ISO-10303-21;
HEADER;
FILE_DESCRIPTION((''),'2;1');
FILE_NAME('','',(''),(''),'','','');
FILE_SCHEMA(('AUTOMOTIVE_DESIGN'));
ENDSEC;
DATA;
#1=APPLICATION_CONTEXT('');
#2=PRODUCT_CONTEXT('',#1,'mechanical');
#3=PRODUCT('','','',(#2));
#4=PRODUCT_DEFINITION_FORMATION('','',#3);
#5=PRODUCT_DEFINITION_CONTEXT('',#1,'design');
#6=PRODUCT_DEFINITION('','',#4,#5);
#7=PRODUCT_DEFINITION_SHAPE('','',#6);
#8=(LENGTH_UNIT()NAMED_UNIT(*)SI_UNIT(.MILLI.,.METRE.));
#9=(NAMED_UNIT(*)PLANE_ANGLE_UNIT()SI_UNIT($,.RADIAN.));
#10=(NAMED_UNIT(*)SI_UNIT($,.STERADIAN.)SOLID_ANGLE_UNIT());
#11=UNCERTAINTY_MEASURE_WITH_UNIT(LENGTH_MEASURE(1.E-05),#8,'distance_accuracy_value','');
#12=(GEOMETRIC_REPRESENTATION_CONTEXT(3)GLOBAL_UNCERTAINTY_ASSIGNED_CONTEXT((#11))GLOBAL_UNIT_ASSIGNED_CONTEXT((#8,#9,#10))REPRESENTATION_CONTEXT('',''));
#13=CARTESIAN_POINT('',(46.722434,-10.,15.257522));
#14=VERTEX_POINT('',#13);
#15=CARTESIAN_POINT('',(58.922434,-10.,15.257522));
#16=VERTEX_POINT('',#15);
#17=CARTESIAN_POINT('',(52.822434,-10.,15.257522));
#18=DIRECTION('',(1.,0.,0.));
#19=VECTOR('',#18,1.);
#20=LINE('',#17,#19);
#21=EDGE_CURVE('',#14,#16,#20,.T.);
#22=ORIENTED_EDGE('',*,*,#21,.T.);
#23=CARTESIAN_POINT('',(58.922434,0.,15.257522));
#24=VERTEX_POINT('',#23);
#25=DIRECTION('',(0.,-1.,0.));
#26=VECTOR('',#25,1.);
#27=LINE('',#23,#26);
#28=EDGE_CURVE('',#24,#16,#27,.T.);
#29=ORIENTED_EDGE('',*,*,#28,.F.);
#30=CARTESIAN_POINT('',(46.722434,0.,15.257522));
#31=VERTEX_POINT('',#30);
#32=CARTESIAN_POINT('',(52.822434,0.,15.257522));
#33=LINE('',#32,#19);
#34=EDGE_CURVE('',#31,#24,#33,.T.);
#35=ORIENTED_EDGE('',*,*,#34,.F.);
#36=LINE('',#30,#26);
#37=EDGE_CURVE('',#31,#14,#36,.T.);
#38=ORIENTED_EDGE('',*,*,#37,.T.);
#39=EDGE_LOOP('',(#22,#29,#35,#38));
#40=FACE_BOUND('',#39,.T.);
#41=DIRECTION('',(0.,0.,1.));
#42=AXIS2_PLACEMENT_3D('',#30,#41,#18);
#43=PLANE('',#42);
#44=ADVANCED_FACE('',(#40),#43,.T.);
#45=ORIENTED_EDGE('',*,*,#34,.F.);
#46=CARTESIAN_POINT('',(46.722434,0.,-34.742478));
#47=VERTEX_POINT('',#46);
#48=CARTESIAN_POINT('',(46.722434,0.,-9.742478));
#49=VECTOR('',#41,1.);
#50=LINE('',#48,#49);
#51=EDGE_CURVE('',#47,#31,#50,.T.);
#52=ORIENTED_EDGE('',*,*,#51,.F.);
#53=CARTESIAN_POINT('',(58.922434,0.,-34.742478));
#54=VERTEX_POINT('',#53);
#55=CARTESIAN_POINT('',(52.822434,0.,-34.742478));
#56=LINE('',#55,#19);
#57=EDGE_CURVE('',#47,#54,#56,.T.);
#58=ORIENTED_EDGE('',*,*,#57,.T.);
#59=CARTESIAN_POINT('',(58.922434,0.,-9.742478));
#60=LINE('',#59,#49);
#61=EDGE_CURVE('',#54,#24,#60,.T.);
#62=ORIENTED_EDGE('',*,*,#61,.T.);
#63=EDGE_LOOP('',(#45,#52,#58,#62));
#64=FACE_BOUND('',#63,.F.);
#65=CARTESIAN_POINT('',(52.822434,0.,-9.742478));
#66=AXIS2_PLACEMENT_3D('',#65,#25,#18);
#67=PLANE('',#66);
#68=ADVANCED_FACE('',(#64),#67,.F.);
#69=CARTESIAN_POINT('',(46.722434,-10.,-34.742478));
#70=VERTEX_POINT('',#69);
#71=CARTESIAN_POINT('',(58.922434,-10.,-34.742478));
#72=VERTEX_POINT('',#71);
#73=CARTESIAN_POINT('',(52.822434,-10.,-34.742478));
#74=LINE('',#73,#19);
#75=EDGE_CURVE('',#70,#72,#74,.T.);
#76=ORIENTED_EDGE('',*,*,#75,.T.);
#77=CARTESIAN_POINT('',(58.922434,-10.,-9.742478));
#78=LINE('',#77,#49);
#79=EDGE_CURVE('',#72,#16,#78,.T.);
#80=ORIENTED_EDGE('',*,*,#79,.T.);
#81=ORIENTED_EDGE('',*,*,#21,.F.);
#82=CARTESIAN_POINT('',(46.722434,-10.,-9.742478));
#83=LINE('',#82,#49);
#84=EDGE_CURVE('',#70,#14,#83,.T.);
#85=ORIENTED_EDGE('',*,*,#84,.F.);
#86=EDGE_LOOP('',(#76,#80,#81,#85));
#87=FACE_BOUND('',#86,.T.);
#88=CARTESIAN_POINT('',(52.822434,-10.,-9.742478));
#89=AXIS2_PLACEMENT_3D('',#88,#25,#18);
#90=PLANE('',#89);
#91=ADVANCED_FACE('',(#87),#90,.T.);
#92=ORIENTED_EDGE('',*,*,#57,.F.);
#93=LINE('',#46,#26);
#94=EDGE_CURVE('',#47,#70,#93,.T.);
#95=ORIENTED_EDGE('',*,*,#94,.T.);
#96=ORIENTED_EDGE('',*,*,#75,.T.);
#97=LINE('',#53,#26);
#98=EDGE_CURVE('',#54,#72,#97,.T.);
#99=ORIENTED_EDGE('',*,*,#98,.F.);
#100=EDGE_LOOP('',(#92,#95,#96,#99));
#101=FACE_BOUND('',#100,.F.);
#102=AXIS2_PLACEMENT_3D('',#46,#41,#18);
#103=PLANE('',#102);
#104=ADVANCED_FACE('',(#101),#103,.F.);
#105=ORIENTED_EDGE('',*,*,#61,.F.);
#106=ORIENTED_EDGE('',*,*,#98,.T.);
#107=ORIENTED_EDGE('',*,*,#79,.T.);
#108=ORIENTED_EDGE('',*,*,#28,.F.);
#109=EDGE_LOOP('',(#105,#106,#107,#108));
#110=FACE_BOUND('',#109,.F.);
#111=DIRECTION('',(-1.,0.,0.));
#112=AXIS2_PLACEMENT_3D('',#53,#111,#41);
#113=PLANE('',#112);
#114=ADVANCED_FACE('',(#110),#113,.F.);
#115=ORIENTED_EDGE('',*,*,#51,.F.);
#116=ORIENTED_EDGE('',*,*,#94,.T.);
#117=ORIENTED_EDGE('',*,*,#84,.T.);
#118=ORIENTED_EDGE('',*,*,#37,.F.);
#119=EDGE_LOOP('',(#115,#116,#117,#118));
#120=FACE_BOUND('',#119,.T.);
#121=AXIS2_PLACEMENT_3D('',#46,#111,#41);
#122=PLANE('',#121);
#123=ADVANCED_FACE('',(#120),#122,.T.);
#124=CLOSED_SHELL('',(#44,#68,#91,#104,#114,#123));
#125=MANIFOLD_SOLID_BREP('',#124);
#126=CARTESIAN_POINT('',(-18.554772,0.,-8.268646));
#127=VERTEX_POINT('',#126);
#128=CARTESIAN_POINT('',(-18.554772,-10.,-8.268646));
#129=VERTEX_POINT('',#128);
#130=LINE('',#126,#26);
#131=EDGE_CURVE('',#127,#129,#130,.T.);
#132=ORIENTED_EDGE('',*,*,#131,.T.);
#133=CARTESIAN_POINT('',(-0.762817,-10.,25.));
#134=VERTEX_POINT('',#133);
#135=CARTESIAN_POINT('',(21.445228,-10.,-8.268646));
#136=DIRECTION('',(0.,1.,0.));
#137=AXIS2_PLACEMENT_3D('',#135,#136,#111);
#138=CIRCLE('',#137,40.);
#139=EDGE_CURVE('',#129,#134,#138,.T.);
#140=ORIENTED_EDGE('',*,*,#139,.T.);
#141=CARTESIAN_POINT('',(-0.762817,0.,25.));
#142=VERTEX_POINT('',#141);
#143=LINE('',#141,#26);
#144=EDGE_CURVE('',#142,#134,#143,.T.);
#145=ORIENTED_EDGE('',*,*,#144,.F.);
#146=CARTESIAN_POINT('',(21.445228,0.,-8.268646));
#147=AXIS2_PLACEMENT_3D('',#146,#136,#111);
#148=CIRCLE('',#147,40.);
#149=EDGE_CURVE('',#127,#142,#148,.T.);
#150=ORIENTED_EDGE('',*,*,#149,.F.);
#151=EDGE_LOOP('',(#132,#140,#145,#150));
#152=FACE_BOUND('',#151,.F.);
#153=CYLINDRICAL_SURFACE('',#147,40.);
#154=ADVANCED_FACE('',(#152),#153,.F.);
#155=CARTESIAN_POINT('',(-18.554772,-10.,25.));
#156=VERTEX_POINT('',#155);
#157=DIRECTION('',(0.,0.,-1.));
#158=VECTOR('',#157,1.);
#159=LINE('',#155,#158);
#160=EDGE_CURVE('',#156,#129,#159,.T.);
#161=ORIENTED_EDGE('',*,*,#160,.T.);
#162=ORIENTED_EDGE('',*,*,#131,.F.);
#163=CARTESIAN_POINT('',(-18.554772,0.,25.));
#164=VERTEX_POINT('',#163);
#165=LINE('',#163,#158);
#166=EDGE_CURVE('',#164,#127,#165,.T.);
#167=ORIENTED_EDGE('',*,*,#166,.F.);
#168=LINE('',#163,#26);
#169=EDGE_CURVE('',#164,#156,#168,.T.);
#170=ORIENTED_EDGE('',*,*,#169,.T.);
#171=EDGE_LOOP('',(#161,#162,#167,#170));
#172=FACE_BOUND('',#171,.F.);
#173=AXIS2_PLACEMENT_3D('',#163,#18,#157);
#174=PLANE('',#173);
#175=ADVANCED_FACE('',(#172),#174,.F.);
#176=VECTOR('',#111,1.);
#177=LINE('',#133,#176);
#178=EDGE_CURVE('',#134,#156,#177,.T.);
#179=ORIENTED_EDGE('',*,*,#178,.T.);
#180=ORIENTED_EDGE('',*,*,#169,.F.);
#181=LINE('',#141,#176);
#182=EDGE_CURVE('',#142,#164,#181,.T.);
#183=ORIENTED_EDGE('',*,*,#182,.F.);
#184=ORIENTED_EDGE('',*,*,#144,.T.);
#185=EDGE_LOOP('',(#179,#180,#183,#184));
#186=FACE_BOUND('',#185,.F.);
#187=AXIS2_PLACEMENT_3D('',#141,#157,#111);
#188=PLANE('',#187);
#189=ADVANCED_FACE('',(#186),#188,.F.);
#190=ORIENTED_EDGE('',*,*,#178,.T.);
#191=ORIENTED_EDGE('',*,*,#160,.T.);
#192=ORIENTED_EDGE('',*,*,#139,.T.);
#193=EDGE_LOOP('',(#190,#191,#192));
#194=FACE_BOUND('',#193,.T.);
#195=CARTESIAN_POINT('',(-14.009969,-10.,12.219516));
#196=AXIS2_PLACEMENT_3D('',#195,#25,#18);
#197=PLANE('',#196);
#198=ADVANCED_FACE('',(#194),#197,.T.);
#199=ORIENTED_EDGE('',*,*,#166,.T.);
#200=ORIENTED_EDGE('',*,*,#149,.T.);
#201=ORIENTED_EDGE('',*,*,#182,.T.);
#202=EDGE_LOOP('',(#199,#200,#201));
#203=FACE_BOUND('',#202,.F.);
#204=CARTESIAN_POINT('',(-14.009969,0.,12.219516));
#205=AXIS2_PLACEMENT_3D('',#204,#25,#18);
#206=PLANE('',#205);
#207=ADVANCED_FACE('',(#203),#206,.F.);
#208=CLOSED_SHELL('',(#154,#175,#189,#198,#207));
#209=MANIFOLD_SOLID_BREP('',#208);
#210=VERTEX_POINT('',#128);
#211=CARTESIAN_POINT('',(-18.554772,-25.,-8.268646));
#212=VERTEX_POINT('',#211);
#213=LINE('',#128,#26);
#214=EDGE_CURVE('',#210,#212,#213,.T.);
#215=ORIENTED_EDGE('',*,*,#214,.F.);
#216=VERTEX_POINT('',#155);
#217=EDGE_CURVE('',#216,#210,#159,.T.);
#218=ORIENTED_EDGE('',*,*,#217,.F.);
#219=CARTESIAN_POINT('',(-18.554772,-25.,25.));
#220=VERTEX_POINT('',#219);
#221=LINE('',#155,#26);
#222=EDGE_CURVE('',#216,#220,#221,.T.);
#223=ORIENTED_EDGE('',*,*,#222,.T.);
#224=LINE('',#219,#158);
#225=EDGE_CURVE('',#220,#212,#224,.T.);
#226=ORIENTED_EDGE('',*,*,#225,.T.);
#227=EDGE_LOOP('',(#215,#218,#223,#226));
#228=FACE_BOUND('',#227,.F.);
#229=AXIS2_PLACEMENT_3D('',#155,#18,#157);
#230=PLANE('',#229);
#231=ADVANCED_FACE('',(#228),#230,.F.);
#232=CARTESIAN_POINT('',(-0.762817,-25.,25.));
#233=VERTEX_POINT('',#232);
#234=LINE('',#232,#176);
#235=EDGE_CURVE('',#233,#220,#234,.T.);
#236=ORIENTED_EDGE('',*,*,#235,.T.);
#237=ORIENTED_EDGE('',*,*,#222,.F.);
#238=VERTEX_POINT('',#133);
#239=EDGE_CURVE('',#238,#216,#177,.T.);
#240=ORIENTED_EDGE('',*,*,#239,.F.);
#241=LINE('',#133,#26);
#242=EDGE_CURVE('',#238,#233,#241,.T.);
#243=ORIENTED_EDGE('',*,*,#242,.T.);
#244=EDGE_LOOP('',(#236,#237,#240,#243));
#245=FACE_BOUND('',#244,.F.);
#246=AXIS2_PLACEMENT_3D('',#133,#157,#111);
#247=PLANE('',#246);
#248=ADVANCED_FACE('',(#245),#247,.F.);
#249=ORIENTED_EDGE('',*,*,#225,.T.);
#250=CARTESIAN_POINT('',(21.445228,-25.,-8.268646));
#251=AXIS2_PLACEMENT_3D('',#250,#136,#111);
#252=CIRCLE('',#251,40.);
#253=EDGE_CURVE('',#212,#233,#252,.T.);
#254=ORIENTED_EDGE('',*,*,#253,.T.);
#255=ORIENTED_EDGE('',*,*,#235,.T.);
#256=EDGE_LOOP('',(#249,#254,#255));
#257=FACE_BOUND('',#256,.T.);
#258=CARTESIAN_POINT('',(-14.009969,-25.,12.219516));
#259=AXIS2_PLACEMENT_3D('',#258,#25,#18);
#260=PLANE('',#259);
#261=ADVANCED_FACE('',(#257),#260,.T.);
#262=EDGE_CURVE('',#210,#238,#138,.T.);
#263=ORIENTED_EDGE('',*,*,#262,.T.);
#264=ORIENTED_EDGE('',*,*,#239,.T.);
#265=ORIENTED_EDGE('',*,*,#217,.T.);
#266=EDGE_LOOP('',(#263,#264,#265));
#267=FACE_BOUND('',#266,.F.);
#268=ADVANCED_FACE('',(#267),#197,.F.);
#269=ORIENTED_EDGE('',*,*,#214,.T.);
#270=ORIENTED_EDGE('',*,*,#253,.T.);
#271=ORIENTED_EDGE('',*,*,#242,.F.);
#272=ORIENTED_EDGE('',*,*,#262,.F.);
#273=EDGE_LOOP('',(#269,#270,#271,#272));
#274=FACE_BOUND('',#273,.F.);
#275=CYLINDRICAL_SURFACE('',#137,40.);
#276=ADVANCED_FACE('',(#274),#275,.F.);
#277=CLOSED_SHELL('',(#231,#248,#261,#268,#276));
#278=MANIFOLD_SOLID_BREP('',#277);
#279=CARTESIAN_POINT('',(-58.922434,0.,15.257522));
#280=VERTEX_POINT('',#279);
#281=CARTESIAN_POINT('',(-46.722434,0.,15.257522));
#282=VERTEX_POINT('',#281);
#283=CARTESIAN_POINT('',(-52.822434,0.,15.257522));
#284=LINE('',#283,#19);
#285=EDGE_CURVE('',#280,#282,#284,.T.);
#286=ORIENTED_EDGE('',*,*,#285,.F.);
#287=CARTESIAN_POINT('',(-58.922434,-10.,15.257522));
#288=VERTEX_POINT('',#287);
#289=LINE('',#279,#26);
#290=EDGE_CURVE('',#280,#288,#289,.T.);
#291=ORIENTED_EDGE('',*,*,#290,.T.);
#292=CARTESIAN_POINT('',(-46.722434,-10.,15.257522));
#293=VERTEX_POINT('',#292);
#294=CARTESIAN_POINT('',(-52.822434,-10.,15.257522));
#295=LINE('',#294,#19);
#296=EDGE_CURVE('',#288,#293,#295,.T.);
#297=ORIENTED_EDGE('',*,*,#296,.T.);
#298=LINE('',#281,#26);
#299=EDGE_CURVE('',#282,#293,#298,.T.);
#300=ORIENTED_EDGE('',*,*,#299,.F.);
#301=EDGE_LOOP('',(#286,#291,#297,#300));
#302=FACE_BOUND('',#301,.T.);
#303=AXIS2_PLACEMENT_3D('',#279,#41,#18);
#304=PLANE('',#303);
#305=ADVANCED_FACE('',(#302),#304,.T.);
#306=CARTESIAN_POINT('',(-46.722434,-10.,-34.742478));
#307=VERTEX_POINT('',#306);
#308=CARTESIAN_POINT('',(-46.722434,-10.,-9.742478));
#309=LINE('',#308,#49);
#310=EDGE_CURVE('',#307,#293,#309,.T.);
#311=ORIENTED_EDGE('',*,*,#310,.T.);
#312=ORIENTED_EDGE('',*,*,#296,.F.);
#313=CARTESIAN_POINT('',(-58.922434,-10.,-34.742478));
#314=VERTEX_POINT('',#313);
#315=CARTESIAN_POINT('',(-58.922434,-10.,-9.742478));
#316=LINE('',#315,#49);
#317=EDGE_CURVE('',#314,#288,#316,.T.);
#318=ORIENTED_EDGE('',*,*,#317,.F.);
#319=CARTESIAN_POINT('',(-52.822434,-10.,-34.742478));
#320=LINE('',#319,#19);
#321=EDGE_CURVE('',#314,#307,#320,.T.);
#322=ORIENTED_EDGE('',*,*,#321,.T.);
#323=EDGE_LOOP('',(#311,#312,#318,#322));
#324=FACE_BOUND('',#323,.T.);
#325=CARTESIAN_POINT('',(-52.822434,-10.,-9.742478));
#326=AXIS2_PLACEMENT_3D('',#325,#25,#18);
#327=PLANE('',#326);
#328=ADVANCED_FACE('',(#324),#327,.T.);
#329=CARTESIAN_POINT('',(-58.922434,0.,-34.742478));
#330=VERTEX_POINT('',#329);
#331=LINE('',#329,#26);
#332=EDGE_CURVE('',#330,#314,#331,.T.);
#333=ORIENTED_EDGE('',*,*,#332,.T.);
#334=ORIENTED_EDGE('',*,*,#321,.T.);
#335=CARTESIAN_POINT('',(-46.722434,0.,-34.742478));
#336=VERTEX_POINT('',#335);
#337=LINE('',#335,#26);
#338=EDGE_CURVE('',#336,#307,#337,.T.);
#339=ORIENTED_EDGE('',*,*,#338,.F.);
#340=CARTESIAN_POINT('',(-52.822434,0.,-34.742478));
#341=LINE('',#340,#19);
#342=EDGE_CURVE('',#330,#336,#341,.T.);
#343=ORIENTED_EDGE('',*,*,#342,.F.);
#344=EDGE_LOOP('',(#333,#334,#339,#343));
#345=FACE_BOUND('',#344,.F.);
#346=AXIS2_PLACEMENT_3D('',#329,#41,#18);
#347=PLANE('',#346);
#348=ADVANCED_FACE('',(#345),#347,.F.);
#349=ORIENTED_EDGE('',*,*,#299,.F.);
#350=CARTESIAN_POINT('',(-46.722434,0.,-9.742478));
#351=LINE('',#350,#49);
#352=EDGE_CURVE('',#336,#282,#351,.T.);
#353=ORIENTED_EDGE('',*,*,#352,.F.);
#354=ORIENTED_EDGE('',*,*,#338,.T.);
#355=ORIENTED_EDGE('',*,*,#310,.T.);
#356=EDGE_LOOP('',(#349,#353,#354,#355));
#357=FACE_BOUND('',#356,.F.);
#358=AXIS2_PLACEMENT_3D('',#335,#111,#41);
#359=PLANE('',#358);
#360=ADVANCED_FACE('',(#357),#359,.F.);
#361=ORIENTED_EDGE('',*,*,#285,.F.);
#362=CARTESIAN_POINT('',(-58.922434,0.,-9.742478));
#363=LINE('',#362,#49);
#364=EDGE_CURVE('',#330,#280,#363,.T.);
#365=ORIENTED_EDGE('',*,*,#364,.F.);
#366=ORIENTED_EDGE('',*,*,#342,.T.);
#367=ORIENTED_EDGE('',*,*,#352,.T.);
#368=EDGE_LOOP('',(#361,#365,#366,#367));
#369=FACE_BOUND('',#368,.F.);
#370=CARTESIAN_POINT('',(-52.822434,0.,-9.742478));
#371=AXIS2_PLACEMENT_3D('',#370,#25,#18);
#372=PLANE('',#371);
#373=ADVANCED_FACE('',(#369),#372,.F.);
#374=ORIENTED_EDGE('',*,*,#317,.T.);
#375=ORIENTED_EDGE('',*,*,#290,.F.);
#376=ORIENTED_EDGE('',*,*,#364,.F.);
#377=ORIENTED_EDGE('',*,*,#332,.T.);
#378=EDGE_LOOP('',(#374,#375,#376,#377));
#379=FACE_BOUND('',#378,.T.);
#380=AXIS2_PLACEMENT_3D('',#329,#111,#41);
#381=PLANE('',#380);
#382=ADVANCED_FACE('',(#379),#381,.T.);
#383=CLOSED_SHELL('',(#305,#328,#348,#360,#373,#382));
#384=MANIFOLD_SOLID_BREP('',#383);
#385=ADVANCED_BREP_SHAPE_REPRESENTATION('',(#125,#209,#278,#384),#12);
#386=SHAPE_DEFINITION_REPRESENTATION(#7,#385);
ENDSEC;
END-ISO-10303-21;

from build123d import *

# Parameters (mm, degrees)
F1_DEPTH = 10
F0_W     = 12.2
F0_H     = 50
F2_DEPTH = 15


with BuildPart() as f1:
    # F0 (on Front) → F1 (new body)
    with BuildSketch(Plane.XZ):
        with BuildLine():
            ThreePointArc((-18.5547723852, -8.2686455011), (-13.8274372079, 10.5950528717), (-0.7628165701, 25))
            Line((-0.7628165701, 25), (-18.5547723852, 25))
            Line((-18.5547723852, 25), (-18.5547723852, -8.2686455011))
        make_face()
    extrude(amount=F1_DEPTH)


with BuildPart() as f1b:
    # F0 (on Front) → F1, piece 2 (new body)
    with BuildSketch(Plane.XZ):
        with Locations((52.8224339074, -9.7424781105)):
            Rectangle(F0_W, F0_H)
    extrude(amount=F1_DEPTH)


with BuildPart() as f1c:
    # F0 (on Front) → F1, piece 3 (new body)
    with BuildSketch(Plane.XZ):
        with Locations((-52.8224339074, -9.7424781105)):
            Rectangle(F0_W, F0_H)
    extrude(amount=F1_DEPTH)


with BuildPart() as f2:
    # F2 (new): a face of the model
    f2_faces = [f1.part.faces().sort_by_distance(p)[0] for p in [
        (-13.5079798624, -10, 17.0974885768),
    ]]
    extrude(f2_faces, amount=F2_DEPTH)


solid = Compound([f1.part, f1b.part, f1c.part, f2.part])
